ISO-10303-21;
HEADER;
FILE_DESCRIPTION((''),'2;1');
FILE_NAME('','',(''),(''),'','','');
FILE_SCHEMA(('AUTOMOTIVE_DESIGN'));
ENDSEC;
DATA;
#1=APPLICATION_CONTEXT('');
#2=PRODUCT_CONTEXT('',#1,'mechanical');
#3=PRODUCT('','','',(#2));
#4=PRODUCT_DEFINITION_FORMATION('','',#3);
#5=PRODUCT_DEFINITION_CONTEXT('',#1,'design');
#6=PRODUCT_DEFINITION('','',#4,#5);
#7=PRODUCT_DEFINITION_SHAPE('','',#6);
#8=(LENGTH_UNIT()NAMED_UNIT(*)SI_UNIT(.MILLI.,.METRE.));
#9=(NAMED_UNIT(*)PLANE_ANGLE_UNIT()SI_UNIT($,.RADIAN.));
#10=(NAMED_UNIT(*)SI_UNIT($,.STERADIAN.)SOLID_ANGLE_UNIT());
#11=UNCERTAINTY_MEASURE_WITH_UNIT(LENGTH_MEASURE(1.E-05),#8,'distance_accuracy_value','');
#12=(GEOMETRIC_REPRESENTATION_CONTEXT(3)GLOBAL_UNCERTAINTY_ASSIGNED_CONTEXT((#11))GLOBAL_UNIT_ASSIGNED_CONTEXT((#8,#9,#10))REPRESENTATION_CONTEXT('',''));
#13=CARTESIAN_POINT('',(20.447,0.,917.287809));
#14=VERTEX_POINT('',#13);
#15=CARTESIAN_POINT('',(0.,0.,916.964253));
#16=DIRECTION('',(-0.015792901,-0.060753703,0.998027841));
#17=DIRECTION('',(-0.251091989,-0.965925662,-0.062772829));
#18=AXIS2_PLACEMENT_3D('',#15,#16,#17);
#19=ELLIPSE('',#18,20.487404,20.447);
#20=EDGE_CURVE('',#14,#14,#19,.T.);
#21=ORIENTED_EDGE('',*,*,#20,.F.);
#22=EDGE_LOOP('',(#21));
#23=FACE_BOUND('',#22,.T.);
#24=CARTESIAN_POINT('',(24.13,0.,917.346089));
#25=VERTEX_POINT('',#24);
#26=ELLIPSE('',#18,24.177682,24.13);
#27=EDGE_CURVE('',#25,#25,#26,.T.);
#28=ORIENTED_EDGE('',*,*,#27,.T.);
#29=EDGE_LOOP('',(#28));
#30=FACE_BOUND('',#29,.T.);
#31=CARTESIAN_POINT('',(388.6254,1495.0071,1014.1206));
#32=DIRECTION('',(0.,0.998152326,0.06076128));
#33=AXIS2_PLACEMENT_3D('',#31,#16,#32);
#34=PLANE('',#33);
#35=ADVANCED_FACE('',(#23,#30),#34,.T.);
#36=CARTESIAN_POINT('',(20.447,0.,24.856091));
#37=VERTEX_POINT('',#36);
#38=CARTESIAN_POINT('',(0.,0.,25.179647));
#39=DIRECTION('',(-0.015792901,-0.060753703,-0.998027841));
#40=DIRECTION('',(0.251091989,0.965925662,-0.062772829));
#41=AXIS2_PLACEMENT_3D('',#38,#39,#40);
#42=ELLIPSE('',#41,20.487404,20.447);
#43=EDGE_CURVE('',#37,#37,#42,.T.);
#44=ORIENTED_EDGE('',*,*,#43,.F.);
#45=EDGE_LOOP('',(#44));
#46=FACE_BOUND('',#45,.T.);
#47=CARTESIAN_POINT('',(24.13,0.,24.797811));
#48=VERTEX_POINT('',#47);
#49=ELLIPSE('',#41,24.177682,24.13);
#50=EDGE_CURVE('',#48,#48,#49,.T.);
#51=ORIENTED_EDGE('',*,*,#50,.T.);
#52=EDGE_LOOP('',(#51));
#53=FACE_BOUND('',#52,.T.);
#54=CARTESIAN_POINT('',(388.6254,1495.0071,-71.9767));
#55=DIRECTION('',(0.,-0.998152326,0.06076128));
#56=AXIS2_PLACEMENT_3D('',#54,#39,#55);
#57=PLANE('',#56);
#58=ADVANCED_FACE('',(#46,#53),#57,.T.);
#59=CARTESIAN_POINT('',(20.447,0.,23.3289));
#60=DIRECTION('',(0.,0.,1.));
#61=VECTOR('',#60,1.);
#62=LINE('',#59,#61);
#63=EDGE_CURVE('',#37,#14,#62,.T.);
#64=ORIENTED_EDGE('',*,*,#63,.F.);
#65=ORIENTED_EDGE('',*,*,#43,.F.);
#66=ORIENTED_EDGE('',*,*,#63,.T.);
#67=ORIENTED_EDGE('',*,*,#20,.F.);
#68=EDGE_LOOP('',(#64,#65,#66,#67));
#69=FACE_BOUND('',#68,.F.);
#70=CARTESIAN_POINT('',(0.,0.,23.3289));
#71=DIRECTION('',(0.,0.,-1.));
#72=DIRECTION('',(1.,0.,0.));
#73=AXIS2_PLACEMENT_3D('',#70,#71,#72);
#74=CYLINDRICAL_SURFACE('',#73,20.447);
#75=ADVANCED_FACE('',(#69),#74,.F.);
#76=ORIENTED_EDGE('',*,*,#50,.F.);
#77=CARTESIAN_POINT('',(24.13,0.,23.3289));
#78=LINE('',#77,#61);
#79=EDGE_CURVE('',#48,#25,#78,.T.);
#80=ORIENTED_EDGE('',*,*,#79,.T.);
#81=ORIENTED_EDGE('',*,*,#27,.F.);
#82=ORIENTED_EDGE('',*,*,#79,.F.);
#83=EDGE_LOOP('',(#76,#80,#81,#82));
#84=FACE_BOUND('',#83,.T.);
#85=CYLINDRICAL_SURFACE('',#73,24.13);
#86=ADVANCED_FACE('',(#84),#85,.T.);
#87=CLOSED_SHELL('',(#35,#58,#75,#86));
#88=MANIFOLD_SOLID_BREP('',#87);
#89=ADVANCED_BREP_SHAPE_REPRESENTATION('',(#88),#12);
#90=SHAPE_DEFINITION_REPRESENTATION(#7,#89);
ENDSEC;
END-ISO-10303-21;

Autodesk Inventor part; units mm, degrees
ref_plane "Start Plane" through (0, 0, 23.3289) normal (0, 0, 1) x (1, 0, 0)
ref_plane "End Plane" through (0, 0, 918.8149) normal (0, 0, 1) x (1, 0, 0)
sketch "Sketch" plane through (0, 0, 0) normal (0, 0, 1) x (1, 0, 0)
  circle A0 centre (0, 0) radius 20.447
  circle A1 centre (0, 0) radius 24.13
  dimension "d0" = 48.26
  dimension "d1" = 3.683
extrude "Body" add sketch "Sketch" along normal up to surface (895.486 mm away) from surface at 23.3289
sketch "Sketch3" plane through (0, 0, 0) normal (0, 0, 1) x (1, 0, 0)
  line L0 (0, 0) -> (10, 0)
ref_plane "Work Plane3" through (0, 0, 0) normal (0, -1, 0) x (1, 0, 0)
ref_plane "Work Plane4" through (388.6254, 1495.0071, 1014.1206) normal (-0.0157929, -0.0607537, 0.9980278) x (0.9998752, -0.0004802, 0.0157929)
split "Split1" plane through (388.6254, 1495.0071, 1014.1206) removes the side toward (-0.0157929, -0.0607537, 0.9980278)
ref_plane "Work Plane5" through (388.6254, 1495.0071, -71.9767) normal (-0.0157929, -0.0607537, -0.9980278) x (0.8735323, -0.48651, 0.0157929)
split "Split2" plane through (388.6254, 1495.0071, -71.9767) removes the side toward (-0.0157929, -0.0607537, -0.9980278)
sketch "Sketch4" plane through (0, 0, 0) normal (0, -1, 0) x (1, 0, 0)
  line L0 (-2, 23.3289) -> (12, 23.3289) projected
  line L1 (-2, 918.8149) -> (12, 918.8149) projected
  dimension "d7" = 895.486
equation "\"d0\" = G_H"
equation "\"d1\" = G_T"
equation "\"d2\" = G_L"
equation "\"G_H\" = 48.26"
equation "\"G_T\" = 3.683"
equation "\"G_L\" = d7"
equation "\"G_OFFSET_START\" = -23.32894"
equation "\"G_OFFSET_END\" = -23.32894"
equation "\"d4\" = -G_OFFSET_START"
equation "\"d5\" = G_OFFSET_END + B_L"
equation "\"B_L\" = 942.14387"
properties part number "ANSI - 1 1/2 x 0.145 - 35.255" material "Steel, Mild"
